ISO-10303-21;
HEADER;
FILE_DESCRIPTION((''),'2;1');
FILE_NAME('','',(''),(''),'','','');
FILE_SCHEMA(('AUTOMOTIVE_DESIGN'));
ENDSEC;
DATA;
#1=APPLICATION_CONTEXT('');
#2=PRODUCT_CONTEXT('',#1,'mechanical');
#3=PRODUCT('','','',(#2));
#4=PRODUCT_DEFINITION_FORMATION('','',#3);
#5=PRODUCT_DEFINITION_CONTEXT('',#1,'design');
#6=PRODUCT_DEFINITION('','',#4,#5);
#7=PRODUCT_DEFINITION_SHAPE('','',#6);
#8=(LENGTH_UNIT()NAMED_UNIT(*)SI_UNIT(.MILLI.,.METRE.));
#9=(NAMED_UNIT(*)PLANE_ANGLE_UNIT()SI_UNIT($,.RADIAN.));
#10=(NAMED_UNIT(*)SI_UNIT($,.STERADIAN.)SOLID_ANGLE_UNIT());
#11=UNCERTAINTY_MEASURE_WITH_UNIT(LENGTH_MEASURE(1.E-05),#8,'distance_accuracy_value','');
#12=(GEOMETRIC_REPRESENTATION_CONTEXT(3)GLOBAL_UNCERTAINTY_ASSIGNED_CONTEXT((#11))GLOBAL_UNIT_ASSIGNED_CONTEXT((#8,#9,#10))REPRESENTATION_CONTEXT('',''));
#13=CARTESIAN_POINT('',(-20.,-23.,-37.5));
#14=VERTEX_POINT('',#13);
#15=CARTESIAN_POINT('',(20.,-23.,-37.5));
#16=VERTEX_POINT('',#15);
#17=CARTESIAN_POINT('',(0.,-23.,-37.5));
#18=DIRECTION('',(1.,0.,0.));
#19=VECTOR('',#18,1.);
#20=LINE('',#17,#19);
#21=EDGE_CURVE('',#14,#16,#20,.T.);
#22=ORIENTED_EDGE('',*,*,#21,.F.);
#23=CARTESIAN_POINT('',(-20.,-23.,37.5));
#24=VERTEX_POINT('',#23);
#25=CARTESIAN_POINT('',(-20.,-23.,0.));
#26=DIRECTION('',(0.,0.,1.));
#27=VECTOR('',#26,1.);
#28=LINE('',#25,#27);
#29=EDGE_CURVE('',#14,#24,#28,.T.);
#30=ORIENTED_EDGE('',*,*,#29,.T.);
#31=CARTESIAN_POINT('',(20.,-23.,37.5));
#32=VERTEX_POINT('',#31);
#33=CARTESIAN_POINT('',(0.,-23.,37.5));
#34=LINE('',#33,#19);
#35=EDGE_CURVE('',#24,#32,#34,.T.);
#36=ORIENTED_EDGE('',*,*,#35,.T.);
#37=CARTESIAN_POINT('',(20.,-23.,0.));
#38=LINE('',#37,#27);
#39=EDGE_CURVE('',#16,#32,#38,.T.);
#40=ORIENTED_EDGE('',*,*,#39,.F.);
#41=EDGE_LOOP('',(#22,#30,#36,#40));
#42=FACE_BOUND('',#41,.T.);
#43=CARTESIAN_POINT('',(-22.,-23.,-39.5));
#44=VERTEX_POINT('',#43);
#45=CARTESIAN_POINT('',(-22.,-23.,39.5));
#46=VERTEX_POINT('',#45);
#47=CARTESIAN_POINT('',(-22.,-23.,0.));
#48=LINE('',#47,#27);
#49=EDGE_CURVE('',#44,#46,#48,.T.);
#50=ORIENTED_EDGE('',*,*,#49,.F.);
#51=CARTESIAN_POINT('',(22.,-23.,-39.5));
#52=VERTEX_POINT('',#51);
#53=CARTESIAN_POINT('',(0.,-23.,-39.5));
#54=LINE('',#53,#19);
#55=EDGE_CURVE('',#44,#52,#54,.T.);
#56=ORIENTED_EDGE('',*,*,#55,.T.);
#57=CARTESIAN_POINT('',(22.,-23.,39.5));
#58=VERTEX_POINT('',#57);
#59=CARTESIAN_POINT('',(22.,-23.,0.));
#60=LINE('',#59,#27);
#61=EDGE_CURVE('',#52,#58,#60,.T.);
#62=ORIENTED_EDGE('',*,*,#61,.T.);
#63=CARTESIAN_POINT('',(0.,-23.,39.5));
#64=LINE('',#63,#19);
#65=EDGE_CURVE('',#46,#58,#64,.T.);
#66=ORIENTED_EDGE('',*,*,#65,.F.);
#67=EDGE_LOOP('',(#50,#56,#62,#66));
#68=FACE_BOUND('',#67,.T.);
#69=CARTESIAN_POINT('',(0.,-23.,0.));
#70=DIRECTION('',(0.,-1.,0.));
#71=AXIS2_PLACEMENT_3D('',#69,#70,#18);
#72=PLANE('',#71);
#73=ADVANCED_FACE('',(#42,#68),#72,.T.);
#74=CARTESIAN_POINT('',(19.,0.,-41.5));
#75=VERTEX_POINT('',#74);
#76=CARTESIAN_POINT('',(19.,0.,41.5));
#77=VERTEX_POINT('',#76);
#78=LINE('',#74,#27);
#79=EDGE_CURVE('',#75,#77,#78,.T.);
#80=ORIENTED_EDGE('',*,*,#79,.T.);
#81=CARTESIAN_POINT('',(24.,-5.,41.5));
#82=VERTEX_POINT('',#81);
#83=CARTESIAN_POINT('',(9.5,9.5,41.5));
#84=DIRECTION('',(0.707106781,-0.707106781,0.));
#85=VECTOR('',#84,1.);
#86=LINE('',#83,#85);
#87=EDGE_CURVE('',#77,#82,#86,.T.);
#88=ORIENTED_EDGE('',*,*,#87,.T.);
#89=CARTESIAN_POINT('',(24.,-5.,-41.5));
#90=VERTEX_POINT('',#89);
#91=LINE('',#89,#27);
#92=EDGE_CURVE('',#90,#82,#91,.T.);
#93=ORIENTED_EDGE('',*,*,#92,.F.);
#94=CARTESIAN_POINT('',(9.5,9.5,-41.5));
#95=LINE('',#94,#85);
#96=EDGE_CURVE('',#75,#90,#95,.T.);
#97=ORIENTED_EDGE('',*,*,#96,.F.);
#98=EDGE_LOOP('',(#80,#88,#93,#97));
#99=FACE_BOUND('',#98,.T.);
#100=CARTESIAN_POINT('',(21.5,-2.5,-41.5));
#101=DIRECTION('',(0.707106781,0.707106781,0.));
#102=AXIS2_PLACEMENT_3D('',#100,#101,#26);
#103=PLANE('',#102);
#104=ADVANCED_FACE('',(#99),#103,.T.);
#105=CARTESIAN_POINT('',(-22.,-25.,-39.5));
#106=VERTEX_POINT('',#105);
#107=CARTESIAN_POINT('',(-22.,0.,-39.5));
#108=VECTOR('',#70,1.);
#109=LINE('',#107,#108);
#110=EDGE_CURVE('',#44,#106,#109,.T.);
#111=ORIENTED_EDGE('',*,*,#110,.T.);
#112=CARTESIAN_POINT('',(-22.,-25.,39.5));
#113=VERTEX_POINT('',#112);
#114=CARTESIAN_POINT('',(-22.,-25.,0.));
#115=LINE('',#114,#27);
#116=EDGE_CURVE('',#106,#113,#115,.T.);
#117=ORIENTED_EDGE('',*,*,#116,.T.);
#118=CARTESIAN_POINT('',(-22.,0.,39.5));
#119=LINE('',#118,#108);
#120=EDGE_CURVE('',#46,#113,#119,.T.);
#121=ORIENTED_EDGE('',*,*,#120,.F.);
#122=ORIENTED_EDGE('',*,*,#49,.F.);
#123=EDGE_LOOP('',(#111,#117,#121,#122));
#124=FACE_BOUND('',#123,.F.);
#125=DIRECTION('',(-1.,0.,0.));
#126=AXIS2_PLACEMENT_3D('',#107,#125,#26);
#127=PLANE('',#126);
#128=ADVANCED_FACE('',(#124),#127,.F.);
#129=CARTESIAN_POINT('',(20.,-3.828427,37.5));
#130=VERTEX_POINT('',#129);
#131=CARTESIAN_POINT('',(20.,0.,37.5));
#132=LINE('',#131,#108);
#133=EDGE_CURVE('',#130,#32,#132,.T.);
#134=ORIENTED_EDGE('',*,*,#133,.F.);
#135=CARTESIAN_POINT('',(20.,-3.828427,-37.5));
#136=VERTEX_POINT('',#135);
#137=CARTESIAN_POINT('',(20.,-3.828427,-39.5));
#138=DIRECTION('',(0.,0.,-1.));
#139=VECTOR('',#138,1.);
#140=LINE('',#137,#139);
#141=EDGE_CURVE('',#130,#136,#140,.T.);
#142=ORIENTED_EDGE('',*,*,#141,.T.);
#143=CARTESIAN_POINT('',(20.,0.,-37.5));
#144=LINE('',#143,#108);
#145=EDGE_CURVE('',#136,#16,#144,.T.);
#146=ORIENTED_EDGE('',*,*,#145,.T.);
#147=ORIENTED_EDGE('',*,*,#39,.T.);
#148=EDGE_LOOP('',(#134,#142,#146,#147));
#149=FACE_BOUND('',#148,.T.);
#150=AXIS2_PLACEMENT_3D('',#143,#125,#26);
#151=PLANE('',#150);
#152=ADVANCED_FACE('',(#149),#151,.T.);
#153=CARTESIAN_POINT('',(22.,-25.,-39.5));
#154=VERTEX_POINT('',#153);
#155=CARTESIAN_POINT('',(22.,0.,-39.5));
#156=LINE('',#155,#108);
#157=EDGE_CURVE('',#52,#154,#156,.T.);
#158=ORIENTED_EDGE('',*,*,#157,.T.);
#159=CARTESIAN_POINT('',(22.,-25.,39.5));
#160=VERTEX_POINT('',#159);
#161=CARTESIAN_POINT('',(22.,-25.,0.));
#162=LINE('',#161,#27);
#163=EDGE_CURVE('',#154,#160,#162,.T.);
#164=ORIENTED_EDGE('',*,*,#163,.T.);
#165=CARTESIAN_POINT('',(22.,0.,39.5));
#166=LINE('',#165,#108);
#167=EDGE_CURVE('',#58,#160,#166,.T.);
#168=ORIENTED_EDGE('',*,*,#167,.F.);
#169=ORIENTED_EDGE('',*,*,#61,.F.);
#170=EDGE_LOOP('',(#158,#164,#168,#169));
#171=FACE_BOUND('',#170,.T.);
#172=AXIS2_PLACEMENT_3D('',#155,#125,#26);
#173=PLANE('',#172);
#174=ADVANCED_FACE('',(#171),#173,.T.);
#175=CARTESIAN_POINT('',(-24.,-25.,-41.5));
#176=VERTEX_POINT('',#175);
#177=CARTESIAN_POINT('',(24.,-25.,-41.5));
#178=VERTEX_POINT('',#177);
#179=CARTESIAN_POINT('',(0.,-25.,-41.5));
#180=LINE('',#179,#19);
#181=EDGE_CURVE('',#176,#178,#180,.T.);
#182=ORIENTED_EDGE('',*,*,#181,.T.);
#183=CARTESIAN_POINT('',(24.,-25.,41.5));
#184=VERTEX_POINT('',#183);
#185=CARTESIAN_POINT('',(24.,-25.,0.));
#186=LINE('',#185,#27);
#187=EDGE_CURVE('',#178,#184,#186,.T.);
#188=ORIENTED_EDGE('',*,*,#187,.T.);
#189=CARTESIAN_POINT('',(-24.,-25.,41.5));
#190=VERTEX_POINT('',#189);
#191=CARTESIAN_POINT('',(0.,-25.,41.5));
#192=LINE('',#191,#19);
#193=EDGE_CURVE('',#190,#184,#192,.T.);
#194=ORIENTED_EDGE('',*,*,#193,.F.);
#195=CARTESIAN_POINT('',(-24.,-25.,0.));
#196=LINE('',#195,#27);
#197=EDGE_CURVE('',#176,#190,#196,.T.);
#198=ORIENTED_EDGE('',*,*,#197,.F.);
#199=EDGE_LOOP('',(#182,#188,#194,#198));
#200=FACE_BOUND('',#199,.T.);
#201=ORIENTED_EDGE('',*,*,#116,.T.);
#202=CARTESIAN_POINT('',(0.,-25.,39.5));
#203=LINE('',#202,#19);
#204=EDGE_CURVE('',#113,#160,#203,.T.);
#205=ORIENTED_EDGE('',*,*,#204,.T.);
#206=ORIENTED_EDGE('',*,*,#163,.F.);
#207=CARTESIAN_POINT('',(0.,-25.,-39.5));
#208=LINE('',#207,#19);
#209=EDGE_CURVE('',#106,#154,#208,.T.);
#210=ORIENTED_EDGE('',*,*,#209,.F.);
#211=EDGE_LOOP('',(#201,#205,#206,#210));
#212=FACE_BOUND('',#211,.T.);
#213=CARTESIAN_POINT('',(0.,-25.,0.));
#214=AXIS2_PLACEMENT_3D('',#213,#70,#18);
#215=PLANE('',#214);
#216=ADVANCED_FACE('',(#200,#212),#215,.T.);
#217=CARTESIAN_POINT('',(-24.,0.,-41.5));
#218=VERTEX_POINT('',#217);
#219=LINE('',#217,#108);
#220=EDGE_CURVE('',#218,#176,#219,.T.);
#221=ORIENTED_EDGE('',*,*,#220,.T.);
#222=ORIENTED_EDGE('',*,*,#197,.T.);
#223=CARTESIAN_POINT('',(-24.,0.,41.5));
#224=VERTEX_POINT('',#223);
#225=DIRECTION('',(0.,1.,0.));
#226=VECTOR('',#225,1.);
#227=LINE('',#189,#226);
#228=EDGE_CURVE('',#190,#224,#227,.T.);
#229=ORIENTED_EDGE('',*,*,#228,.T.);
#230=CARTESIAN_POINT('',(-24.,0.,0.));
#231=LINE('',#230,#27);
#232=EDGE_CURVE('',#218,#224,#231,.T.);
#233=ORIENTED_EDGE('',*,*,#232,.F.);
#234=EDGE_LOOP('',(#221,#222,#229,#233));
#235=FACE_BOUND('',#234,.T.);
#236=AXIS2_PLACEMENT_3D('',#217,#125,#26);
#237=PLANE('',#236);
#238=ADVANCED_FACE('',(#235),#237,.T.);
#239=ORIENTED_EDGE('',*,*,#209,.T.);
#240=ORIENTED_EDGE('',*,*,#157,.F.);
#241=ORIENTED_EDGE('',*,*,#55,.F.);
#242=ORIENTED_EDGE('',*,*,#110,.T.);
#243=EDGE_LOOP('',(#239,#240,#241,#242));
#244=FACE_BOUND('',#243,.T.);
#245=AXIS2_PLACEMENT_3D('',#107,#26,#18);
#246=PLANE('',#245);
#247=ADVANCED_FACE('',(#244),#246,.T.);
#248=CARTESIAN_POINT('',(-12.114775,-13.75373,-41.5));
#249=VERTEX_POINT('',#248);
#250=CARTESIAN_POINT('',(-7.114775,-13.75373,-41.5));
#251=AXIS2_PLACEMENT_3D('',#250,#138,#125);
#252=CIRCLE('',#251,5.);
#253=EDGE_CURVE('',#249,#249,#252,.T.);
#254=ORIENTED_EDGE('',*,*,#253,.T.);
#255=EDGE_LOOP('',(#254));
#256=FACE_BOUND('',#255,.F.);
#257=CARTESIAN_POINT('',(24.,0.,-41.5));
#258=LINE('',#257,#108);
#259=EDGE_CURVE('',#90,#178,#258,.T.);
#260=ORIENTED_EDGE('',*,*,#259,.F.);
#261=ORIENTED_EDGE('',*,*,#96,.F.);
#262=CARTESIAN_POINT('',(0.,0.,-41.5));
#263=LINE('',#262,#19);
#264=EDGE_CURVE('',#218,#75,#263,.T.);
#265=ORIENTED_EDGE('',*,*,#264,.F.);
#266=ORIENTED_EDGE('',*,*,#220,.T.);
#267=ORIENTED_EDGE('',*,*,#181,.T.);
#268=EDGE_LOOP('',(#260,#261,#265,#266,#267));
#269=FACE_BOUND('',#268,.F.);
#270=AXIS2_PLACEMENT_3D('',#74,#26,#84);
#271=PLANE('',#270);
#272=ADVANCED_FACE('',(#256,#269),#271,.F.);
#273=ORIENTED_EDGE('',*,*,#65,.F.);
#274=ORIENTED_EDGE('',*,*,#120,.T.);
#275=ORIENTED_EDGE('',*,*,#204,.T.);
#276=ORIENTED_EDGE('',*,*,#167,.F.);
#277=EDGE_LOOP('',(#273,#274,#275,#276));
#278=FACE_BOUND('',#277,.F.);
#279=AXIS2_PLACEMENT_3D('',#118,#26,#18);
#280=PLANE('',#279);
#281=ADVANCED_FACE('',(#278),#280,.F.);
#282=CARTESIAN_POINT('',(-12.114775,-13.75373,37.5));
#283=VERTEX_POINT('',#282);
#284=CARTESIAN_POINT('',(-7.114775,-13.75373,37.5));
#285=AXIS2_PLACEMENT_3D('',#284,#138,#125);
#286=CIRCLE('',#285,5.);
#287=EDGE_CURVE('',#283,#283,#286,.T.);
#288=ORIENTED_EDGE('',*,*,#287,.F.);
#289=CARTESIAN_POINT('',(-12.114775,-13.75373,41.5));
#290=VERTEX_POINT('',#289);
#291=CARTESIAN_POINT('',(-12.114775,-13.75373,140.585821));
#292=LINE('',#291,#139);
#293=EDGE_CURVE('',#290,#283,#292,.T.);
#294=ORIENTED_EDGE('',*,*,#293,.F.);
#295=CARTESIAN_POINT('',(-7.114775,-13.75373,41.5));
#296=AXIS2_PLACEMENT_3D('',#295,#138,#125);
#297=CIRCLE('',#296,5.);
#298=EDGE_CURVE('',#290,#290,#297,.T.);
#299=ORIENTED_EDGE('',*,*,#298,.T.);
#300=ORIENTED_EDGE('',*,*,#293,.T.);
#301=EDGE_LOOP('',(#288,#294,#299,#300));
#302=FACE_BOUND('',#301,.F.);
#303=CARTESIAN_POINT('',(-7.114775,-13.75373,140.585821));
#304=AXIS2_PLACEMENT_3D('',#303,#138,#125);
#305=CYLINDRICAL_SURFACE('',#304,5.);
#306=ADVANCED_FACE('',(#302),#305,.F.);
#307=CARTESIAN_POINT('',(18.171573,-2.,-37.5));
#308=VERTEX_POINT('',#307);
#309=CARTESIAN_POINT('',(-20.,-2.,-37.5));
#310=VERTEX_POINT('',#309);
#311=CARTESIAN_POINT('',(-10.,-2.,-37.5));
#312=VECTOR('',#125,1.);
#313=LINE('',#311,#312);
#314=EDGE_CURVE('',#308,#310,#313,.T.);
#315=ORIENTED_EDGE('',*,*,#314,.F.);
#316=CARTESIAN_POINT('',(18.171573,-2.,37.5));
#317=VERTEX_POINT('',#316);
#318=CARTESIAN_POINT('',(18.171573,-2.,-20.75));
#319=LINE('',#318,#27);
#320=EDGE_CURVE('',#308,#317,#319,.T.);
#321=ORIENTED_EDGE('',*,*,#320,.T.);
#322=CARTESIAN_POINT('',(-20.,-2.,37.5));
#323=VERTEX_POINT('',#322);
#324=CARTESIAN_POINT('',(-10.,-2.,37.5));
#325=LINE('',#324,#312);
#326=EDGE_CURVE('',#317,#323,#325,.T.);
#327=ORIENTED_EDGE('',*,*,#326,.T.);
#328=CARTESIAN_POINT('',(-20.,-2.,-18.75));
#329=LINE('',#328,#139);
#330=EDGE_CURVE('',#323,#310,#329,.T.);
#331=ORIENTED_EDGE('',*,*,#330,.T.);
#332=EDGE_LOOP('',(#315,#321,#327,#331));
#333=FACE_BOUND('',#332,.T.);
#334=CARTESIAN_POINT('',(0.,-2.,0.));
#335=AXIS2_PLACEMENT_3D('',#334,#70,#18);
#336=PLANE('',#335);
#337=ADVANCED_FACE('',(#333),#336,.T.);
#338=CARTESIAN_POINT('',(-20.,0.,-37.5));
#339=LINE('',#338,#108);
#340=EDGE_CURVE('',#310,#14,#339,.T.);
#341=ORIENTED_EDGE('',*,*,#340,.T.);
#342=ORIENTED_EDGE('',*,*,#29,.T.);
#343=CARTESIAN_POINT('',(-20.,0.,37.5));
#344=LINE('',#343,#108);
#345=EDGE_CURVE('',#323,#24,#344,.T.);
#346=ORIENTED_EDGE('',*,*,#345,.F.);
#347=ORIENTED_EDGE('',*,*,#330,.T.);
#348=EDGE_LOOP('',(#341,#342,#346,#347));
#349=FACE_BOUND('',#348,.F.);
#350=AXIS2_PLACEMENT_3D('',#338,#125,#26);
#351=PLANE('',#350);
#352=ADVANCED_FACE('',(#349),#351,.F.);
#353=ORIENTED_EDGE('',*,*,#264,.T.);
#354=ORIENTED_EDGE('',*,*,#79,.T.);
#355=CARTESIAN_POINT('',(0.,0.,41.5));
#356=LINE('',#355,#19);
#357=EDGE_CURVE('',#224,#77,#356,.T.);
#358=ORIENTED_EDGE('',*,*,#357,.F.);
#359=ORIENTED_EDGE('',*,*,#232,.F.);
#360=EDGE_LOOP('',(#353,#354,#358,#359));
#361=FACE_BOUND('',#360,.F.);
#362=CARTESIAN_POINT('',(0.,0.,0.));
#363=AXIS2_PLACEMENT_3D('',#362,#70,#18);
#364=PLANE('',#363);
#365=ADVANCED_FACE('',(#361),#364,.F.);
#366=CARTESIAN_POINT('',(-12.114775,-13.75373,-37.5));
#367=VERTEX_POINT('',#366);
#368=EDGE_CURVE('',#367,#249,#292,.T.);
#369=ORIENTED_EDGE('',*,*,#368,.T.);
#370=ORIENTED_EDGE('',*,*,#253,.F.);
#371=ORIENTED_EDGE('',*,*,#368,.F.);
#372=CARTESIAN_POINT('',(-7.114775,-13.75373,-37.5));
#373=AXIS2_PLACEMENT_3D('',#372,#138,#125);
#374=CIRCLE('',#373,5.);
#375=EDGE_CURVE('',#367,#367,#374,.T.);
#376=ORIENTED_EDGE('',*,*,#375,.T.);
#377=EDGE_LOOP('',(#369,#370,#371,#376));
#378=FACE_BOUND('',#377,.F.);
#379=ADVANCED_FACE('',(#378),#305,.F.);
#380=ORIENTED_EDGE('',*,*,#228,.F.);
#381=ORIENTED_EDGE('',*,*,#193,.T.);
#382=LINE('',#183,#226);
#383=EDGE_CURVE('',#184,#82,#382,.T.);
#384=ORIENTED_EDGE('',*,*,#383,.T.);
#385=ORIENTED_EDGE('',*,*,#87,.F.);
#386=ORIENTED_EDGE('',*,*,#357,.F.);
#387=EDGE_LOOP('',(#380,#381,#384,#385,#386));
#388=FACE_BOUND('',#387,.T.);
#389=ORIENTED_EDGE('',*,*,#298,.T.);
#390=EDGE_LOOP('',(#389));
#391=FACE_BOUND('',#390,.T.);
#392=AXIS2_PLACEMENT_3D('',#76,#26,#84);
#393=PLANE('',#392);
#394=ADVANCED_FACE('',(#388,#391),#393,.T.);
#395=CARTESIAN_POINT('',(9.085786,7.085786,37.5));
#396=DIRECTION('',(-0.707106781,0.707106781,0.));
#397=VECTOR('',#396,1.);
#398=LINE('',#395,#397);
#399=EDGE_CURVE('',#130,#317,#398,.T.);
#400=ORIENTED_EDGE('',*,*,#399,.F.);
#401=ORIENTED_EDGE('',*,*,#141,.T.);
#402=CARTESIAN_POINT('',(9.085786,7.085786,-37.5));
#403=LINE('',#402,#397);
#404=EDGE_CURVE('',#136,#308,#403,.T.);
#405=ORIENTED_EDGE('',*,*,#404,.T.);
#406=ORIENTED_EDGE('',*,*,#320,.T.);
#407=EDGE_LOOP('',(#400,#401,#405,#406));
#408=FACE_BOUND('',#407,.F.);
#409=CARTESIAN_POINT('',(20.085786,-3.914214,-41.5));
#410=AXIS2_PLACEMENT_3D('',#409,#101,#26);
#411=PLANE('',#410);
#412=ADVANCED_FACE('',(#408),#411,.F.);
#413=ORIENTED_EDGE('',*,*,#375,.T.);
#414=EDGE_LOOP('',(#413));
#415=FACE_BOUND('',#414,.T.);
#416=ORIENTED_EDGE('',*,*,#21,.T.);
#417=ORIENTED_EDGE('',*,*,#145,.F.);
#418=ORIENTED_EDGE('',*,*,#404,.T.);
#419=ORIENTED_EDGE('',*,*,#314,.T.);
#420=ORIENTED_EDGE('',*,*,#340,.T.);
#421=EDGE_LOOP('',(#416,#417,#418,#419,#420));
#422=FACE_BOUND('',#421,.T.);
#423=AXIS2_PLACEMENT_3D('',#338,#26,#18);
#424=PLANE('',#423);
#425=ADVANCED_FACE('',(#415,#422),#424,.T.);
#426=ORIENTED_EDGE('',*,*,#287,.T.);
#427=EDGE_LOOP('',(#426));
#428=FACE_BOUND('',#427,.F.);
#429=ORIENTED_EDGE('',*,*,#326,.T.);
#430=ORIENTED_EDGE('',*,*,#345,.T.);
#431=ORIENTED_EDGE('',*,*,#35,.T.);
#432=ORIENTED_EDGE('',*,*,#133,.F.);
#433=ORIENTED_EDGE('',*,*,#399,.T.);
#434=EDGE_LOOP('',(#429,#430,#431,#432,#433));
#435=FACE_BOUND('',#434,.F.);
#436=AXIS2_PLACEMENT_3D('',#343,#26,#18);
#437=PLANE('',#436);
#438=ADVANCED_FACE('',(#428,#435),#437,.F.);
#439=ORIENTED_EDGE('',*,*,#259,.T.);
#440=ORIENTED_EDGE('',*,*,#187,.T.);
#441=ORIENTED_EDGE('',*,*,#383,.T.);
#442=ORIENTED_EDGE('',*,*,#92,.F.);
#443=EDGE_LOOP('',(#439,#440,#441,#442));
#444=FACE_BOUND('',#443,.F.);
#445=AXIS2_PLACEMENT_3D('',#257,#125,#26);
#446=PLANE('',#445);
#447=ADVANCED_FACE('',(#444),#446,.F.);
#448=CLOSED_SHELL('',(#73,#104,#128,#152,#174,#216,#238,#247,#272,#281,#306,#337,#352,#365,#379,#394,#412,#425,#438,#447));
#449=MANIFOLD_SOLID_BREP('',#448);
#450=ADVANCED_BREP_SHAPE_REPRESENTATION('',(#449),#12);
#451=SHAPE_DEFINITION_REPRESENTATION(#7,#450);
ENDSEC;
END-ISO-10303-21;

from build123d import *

# Parameters (mm, degrees)
F0_W     = 48
F0_H     = 83
F0_W_2   = 44
F0_H_2   = 79
F0_W_3   = 40
F0_H_3   = 75
F1_DEPTH = 2
F2_DEPTH = 25
F3_DEPTH = 23
F4_SIZE2 = 5
F4_SIZE  = 5
F6_DEPTH = 2
F12_D    = 10


with BuildPart() as f1:
    # F0 (on Front) → F1 (new body)
    with BuildSketch(Plane.XZ):
        Rectangle(F0_W, F0_H)
        Rectangle(F0_W_2, F0_H_2, mode=Mode.SUBTRACT)
        Rectangle(F0_W_2, F0_H_2)
        Rectangle(F0_W_3, F0_H_3, mode=Mode.SUBTRACT)
        Rectangle(F0_W_3, F0_H_3)
    extrude(amount=F1_DEPTH)

    # F0 (on Front) → F2 (join)
    with BuildSketch(Plane.XZ):
        Rectangle(F0_W, F0_H)
        Rectangle(F0_W_2, F0_H_2, mode=Mode.SUBTRACT)
    extrude(amount=F2_DEPTH)

    # F0 (on Front) → F3 (join)
    with BuildSketch(Plane.XZ):
        Rectangle(F0_W_2, F0_H_2)
        Rectangle(F0_W_3, F0_H_3, mode=Mode.SUBTRACT)
    extrude(amount=F3_DEPTH)

    # F4
    f4_edges = [f1.edges().sort_by_distance(p)[0] for p in [
        (24, 0, 0),
    ]]
    chamfer(f4_edges, length=F4_SIZE, length2=F4_SIZE2)

    # F6 (add): a face of the model
    f6_faces = [f1.faces().sort_by_distance(p)[0] for p in [
        (21.5, -2.5, 0),
    ]]
    extrude(f6_faces, amount=-F6_DEPTH)

    # F12 (through all)
    with Locations(Plane.XY.offset(41.5)):
        with Locations((-7.1147754788, -13.7537298724)):
            Hole(F12_D / 2)


solid = f1.part
